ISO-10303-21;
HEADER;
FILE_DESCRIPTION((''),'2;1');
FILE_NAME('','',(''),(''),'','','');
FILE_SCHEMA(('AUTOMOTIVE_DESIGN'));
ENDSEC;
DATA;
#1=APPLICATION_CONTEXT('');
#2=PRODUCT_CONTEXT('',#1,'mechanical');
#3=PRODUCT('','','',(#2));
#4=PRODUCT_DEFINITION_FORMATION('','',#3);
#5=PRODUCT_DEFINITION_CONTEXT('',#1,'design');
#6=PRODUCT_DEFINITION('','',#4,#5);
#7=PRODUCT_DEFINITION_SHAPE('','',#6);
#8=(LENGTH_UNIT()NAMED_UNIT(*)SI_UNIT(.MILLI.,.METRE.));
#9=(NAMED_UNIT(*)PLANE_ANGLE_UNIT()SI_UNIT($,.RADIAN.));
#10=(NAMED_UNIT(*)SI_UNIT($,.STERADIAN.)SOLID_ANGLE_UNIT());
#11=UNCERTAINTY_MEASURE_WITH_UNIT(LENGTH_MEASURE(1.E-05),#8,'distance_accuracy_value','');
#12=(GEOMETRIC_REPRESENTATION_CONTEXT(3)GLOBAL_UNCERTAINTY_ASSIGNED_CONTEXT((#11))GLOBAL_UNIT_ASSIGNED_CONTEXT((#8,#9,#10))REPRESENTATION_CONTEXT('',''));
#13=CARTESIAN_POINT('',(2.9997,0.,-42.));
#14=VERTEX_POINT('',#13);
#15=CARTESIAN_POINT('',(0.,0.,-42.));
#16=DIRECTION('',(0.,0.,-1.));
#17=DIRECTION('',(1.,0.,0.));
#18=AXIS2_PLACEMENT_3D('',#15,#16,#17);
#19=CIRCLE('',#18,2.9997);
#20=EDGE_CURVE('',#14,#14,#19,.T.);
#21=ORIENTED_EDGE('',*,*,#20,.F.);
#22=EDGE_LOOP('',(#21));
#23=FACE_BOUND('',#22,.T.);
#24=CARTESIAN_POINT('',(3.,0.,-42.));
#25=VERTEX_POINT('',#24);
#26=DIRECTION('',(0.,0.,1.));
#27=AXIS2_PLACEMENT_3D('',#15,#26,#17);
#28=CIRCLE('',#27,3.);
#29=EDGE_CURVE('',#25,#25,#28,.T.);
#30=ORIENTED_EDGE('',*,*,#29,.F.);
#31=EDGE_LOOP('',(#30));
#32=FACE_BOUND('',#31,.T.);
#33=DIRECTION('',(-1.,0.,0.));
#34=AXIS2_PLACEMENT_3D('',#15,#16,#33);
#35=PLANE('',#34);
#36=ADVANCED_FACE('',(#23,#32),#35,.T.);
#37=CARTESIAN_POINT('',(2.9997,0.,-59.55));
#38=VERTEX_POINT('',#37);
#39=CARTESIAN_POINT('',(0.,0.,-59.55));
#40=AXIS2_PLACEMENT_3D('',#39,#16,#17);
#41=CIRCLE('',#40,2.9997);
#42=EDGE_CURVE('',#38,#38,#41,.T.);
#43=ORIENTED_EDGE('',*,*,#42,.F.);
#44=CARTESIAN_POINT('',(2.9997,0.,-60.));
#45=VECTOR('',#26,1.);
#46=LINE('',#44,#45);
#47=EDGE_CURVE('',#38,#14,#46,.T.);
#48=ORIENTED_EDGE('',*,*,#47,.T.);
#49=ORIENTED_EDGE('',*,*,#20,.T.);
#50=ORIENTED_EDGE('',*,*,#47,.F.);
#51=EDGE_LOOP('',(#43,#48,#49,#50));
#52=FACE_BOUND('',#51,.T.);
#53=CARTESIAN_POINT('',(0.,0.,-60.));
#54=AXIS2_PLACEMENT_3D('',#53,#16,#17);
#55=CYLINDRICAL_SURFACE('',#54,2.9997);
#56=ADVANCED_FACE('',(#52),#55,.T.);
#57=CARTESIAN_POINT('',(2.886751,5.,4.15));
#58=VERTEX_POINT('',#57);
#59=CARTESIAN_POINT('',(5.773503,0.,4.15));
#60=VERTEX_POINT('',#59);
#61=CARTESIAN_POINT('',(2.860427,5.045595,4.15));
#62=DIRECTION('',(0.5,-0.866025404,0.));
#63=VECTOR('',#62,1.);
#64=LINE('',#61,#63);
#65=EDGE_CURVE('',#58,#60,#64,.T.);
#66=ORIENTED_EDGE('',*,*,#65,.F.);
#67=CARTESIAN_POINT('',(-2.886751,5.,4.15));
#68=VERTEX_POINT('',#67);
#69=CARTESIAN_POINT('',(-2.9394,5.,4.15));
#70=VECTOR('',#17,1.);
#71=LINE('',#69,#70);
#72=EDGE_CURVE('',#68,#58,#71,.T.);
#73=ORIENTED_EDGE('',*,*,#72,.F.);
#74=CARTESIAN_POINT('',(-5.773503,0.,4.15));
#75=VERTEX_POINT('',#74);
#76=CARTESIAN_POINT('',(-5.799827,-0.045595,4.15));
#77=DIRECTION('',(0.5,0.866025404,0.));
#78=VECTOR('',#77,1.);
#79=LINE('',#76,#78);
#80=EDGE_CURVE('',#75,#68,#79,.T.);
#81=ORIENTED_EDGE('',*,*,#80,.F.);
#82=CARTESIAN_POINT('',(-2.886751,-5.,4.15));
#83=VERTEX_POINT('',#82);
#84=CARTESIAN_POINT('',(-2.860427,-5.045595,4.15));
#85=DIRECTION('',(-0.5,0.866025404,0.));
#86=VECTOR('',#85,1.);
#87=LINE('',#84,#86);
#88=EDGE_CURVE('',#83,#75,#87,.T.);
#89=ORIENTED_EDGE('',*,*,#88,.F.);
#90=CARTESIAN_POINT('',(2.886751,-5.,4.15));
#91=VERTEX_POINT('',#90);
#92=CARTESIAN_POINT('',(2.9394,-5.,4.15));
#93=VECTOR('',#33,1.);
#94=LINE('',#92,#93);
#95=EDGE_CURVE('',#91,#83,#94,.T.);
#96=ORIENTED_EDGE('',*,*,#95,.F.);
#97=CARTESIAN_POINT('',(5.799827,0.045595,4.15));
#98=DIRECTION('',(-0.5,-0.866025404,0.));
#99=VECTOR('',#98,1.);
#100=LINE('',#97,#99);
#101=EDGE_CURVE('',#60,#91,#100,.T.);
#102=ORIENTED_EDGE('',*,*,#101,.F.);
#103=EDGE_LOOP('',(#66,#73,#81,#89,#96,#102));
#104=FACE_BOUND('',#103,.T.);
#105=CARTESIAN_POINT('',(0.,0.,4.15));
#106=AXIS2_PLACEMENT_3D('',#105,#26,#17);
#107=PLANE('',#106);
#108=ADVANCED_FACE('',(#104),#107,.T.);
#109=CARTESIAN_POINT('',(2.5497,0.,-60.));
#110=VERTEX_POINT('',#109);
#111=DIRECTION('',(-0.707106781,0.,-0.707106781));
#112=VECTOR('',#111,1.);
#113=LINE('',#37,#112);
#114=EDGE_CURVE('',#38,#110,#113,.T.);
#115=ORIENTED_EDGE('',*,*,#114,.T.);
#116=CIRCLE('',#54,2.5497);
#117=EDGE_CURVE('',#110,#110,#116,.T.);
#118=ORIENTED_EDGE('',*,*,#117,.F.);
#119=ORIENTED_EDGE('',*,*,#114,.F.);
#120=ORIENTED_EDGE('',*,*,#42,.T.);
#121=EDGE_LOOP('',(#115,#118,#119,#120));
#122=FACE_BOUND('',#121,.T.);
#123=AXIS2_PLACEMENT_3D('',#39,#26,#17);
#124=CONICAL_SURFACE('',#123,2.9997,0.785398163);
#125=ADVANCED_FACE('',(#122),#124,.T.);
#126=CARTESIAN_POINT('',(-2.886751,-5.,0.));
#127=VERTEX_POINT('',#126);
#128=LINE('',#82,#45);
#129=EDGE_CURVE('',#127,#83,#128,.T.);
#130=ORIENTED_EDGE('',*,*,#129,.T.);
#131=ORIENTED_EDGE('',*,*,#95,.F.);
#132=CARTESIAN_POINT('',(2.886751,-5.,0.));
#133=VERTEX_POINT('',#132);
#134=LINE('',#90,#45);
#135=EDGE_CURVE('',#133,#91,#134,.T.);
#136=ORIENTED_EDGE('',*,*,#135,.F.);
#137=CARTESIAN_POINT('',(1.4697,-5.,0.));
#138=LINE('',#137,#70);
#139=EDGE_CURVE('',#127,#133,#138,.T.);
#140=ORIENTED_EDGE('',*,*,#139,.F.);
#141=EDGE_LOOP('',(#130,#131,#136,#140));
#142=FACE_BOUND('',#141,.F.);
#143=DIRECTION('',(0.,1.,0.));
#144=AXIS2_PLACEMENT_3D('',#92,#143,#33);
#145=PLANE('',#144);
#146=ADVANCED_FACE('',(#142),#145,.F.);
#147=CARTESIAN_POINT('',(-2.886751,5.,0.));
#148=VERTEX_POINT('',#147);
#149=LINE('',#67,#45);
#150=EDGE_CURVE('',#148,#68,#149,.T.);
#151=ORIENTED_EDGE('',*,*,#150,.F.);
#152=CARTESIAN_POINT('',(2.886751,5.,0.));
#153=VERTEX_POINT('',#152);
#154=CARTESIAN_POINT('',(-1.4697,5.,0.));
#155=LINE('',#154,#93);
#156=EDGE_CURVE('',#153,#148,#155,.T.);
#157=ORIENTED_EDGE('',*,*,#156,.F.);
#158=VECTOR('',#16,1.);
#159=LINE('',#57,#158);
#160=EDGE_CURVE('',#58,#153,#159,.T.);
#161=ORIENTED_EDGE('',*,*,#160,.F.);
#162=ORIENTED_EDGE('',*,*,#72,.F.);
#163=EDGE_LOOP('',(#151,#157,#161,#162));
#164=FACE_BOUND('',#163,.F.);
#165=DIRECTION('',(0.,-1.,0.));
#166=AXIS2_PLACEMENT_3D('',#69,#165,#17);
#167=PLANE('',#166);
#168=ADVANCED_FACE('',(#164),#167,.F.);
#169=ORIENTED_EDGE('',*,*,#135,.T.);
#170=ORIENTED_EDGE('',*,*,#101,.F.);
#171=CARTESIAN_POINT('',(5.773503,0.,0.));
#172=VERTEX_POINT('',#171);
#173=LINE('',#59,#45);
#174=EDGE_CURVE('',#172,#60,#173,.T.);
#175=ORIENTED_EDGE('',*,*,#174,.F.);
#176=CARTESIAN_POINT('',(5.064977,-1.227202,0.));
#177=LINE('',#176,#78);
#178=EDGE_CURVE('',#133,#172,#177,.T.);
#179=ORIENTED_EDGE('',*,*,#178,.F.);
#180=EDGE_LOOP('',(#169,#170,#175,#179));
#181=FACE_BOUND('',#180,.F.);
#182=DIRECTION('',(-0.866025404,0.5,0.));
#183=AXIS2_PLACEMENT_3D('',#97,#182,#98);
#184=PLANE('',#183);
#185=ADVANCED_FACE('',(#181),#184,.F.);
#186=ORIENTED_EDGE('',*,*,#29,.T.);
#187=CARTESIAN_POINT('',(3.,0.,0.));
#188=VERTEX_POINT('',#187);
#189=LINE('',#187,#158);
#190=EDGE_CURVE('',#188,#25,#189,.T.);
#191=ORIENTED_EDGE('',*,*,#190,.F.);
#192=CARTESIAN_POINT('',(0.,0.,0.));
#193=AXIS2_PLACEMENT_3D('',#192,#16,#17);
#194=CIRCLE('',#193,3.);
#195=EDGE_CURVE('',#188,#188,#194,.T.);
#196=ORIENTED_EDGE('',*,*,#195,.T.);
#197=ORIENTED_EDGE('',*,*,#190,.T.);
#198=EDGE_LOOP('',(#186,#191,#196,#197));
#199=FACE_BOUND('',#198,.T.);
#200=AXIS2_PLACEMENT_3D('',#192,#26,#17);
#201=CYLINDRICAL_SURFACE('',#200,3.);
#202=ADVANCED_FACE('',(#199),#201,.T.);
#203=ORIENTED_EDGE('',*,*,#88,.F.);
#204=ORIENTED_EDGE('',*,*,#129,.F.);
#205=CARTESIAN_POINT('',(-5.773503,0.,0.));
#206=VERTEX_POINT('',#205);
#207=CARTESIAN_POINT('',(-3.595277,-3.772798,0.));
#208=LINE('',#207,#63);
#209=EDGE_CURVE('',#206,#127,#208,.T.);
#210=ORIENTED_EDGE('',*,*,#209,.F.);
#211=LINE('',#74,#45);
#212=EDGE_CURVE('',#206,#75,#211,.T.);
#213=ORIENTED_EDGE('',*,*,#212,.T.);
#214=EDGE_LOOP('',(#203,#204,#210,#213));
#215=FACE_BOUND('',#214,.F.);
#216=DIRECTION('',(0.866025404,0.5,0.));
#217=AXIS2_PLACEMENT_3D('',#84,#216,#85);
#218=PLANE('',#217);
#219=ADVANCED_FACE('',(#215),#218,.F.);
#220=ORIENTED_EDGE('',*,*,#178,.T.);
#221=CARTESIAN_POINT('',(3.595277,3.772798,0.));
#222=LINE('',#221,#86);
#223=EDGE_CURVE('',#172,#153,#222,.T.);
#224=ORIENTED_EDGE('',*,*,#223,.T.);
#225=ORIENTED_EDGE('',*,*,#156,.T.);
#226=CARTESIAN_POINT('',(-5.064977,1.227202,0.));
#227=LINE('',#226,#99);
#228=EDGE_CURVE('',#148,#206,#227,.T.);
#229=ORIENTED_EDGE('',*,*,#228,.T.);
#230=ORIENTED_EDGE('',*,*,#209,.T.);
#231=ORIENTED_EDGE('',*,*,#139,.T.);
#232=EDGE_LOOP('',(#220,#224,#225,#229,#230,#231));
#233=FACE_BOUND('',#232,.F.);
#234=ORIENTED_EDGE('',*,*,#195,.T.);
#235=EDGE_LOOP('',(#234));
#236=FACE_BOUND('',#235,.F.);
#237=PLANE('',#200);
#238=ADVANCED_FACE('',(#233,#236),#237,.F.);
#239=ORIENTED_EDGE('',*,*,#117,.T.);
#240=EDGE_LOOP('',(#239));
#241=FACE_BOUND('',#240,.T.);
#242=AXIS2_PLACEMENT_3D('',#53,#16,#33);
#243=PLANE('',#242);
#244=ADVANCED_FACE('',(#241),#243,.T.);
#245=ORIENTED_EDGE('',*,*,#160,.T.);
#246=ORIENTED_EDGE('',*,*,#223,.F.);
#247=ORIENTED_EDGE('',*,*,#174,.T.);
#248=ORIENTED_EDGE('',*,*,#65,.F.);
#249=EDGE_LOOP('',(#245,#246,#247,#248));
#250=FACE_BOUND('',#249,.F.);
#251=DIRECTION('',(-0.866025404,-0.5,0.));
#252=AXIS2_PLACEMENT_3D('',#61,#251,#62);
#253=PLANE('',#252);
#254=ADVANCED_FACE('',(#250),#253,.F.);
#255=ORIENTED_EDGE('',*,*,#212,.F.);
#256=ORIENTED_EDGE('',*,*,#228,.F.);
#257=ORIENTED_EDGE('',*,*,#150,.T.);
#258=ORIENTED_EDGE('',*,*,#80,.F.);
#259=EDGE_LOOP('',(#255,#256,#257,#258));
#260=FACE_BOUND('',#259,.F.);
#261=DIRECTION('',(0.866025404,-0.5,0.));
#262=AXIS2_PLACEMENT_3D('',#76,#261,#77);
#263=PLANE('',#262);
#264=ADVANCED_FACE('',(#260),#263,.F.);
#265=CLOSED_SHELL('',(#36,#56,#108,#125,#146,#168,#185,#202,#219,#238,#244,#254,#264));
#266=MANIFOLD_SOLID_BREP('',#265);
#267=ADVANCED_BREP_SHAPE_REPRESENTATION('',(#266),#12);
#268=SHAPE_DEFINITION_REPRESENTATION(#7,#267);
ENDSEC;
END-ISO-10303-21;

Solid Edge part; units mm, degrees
sketch "Sketch1" plane through (0, 0, 0) normal (0, 0, 1) x (1, 0, 0)
  circle A0 centre (0, 0) radius 5.8
  dimension "D1" = 11.6
extrude "Protrusion1" add sketch "Sketch1" along normal blind 4.15
sketch "Sketch2" plane through (0, 0, 0) normal (0, 0, -1) x (1, 0, 0)
  circle A0 centre (0, 0) radius 3
extrude "Protrusion2" add sketch "Sketch2" along normal blind 60
sketch "Sketch3" plane through (0, 0, -60) normal (0, 0, -1) x (1, 0, 0)
  circle A0 centre (0, 0) radius 2.9997
extrude "Cutout1" cut sketch "Sketch3" against normal blind 18 flip side to cut
chamfer "Chamfer_1" distance 0.45 angle 45 1 edges at (-2.9997, 0, -60)
sketch "Sketch4" plane through (0, 0, 4.15) normal (0, 0, 1) x (1, 0, 0)
  line L0 (-2.9394, 5) -> (2.9394, 5)
  dimension "D1" = 10
extrude "Cutout2" cut sketch "Sketch4" against normal up to next material side at (0, 5.05, 4.15)
pattern_circular "Pattern1" count 6 over 360 about axis through (0, 0, 4.15) along (0, 0, 1) of "Cutout2"
properties part number "118846"
